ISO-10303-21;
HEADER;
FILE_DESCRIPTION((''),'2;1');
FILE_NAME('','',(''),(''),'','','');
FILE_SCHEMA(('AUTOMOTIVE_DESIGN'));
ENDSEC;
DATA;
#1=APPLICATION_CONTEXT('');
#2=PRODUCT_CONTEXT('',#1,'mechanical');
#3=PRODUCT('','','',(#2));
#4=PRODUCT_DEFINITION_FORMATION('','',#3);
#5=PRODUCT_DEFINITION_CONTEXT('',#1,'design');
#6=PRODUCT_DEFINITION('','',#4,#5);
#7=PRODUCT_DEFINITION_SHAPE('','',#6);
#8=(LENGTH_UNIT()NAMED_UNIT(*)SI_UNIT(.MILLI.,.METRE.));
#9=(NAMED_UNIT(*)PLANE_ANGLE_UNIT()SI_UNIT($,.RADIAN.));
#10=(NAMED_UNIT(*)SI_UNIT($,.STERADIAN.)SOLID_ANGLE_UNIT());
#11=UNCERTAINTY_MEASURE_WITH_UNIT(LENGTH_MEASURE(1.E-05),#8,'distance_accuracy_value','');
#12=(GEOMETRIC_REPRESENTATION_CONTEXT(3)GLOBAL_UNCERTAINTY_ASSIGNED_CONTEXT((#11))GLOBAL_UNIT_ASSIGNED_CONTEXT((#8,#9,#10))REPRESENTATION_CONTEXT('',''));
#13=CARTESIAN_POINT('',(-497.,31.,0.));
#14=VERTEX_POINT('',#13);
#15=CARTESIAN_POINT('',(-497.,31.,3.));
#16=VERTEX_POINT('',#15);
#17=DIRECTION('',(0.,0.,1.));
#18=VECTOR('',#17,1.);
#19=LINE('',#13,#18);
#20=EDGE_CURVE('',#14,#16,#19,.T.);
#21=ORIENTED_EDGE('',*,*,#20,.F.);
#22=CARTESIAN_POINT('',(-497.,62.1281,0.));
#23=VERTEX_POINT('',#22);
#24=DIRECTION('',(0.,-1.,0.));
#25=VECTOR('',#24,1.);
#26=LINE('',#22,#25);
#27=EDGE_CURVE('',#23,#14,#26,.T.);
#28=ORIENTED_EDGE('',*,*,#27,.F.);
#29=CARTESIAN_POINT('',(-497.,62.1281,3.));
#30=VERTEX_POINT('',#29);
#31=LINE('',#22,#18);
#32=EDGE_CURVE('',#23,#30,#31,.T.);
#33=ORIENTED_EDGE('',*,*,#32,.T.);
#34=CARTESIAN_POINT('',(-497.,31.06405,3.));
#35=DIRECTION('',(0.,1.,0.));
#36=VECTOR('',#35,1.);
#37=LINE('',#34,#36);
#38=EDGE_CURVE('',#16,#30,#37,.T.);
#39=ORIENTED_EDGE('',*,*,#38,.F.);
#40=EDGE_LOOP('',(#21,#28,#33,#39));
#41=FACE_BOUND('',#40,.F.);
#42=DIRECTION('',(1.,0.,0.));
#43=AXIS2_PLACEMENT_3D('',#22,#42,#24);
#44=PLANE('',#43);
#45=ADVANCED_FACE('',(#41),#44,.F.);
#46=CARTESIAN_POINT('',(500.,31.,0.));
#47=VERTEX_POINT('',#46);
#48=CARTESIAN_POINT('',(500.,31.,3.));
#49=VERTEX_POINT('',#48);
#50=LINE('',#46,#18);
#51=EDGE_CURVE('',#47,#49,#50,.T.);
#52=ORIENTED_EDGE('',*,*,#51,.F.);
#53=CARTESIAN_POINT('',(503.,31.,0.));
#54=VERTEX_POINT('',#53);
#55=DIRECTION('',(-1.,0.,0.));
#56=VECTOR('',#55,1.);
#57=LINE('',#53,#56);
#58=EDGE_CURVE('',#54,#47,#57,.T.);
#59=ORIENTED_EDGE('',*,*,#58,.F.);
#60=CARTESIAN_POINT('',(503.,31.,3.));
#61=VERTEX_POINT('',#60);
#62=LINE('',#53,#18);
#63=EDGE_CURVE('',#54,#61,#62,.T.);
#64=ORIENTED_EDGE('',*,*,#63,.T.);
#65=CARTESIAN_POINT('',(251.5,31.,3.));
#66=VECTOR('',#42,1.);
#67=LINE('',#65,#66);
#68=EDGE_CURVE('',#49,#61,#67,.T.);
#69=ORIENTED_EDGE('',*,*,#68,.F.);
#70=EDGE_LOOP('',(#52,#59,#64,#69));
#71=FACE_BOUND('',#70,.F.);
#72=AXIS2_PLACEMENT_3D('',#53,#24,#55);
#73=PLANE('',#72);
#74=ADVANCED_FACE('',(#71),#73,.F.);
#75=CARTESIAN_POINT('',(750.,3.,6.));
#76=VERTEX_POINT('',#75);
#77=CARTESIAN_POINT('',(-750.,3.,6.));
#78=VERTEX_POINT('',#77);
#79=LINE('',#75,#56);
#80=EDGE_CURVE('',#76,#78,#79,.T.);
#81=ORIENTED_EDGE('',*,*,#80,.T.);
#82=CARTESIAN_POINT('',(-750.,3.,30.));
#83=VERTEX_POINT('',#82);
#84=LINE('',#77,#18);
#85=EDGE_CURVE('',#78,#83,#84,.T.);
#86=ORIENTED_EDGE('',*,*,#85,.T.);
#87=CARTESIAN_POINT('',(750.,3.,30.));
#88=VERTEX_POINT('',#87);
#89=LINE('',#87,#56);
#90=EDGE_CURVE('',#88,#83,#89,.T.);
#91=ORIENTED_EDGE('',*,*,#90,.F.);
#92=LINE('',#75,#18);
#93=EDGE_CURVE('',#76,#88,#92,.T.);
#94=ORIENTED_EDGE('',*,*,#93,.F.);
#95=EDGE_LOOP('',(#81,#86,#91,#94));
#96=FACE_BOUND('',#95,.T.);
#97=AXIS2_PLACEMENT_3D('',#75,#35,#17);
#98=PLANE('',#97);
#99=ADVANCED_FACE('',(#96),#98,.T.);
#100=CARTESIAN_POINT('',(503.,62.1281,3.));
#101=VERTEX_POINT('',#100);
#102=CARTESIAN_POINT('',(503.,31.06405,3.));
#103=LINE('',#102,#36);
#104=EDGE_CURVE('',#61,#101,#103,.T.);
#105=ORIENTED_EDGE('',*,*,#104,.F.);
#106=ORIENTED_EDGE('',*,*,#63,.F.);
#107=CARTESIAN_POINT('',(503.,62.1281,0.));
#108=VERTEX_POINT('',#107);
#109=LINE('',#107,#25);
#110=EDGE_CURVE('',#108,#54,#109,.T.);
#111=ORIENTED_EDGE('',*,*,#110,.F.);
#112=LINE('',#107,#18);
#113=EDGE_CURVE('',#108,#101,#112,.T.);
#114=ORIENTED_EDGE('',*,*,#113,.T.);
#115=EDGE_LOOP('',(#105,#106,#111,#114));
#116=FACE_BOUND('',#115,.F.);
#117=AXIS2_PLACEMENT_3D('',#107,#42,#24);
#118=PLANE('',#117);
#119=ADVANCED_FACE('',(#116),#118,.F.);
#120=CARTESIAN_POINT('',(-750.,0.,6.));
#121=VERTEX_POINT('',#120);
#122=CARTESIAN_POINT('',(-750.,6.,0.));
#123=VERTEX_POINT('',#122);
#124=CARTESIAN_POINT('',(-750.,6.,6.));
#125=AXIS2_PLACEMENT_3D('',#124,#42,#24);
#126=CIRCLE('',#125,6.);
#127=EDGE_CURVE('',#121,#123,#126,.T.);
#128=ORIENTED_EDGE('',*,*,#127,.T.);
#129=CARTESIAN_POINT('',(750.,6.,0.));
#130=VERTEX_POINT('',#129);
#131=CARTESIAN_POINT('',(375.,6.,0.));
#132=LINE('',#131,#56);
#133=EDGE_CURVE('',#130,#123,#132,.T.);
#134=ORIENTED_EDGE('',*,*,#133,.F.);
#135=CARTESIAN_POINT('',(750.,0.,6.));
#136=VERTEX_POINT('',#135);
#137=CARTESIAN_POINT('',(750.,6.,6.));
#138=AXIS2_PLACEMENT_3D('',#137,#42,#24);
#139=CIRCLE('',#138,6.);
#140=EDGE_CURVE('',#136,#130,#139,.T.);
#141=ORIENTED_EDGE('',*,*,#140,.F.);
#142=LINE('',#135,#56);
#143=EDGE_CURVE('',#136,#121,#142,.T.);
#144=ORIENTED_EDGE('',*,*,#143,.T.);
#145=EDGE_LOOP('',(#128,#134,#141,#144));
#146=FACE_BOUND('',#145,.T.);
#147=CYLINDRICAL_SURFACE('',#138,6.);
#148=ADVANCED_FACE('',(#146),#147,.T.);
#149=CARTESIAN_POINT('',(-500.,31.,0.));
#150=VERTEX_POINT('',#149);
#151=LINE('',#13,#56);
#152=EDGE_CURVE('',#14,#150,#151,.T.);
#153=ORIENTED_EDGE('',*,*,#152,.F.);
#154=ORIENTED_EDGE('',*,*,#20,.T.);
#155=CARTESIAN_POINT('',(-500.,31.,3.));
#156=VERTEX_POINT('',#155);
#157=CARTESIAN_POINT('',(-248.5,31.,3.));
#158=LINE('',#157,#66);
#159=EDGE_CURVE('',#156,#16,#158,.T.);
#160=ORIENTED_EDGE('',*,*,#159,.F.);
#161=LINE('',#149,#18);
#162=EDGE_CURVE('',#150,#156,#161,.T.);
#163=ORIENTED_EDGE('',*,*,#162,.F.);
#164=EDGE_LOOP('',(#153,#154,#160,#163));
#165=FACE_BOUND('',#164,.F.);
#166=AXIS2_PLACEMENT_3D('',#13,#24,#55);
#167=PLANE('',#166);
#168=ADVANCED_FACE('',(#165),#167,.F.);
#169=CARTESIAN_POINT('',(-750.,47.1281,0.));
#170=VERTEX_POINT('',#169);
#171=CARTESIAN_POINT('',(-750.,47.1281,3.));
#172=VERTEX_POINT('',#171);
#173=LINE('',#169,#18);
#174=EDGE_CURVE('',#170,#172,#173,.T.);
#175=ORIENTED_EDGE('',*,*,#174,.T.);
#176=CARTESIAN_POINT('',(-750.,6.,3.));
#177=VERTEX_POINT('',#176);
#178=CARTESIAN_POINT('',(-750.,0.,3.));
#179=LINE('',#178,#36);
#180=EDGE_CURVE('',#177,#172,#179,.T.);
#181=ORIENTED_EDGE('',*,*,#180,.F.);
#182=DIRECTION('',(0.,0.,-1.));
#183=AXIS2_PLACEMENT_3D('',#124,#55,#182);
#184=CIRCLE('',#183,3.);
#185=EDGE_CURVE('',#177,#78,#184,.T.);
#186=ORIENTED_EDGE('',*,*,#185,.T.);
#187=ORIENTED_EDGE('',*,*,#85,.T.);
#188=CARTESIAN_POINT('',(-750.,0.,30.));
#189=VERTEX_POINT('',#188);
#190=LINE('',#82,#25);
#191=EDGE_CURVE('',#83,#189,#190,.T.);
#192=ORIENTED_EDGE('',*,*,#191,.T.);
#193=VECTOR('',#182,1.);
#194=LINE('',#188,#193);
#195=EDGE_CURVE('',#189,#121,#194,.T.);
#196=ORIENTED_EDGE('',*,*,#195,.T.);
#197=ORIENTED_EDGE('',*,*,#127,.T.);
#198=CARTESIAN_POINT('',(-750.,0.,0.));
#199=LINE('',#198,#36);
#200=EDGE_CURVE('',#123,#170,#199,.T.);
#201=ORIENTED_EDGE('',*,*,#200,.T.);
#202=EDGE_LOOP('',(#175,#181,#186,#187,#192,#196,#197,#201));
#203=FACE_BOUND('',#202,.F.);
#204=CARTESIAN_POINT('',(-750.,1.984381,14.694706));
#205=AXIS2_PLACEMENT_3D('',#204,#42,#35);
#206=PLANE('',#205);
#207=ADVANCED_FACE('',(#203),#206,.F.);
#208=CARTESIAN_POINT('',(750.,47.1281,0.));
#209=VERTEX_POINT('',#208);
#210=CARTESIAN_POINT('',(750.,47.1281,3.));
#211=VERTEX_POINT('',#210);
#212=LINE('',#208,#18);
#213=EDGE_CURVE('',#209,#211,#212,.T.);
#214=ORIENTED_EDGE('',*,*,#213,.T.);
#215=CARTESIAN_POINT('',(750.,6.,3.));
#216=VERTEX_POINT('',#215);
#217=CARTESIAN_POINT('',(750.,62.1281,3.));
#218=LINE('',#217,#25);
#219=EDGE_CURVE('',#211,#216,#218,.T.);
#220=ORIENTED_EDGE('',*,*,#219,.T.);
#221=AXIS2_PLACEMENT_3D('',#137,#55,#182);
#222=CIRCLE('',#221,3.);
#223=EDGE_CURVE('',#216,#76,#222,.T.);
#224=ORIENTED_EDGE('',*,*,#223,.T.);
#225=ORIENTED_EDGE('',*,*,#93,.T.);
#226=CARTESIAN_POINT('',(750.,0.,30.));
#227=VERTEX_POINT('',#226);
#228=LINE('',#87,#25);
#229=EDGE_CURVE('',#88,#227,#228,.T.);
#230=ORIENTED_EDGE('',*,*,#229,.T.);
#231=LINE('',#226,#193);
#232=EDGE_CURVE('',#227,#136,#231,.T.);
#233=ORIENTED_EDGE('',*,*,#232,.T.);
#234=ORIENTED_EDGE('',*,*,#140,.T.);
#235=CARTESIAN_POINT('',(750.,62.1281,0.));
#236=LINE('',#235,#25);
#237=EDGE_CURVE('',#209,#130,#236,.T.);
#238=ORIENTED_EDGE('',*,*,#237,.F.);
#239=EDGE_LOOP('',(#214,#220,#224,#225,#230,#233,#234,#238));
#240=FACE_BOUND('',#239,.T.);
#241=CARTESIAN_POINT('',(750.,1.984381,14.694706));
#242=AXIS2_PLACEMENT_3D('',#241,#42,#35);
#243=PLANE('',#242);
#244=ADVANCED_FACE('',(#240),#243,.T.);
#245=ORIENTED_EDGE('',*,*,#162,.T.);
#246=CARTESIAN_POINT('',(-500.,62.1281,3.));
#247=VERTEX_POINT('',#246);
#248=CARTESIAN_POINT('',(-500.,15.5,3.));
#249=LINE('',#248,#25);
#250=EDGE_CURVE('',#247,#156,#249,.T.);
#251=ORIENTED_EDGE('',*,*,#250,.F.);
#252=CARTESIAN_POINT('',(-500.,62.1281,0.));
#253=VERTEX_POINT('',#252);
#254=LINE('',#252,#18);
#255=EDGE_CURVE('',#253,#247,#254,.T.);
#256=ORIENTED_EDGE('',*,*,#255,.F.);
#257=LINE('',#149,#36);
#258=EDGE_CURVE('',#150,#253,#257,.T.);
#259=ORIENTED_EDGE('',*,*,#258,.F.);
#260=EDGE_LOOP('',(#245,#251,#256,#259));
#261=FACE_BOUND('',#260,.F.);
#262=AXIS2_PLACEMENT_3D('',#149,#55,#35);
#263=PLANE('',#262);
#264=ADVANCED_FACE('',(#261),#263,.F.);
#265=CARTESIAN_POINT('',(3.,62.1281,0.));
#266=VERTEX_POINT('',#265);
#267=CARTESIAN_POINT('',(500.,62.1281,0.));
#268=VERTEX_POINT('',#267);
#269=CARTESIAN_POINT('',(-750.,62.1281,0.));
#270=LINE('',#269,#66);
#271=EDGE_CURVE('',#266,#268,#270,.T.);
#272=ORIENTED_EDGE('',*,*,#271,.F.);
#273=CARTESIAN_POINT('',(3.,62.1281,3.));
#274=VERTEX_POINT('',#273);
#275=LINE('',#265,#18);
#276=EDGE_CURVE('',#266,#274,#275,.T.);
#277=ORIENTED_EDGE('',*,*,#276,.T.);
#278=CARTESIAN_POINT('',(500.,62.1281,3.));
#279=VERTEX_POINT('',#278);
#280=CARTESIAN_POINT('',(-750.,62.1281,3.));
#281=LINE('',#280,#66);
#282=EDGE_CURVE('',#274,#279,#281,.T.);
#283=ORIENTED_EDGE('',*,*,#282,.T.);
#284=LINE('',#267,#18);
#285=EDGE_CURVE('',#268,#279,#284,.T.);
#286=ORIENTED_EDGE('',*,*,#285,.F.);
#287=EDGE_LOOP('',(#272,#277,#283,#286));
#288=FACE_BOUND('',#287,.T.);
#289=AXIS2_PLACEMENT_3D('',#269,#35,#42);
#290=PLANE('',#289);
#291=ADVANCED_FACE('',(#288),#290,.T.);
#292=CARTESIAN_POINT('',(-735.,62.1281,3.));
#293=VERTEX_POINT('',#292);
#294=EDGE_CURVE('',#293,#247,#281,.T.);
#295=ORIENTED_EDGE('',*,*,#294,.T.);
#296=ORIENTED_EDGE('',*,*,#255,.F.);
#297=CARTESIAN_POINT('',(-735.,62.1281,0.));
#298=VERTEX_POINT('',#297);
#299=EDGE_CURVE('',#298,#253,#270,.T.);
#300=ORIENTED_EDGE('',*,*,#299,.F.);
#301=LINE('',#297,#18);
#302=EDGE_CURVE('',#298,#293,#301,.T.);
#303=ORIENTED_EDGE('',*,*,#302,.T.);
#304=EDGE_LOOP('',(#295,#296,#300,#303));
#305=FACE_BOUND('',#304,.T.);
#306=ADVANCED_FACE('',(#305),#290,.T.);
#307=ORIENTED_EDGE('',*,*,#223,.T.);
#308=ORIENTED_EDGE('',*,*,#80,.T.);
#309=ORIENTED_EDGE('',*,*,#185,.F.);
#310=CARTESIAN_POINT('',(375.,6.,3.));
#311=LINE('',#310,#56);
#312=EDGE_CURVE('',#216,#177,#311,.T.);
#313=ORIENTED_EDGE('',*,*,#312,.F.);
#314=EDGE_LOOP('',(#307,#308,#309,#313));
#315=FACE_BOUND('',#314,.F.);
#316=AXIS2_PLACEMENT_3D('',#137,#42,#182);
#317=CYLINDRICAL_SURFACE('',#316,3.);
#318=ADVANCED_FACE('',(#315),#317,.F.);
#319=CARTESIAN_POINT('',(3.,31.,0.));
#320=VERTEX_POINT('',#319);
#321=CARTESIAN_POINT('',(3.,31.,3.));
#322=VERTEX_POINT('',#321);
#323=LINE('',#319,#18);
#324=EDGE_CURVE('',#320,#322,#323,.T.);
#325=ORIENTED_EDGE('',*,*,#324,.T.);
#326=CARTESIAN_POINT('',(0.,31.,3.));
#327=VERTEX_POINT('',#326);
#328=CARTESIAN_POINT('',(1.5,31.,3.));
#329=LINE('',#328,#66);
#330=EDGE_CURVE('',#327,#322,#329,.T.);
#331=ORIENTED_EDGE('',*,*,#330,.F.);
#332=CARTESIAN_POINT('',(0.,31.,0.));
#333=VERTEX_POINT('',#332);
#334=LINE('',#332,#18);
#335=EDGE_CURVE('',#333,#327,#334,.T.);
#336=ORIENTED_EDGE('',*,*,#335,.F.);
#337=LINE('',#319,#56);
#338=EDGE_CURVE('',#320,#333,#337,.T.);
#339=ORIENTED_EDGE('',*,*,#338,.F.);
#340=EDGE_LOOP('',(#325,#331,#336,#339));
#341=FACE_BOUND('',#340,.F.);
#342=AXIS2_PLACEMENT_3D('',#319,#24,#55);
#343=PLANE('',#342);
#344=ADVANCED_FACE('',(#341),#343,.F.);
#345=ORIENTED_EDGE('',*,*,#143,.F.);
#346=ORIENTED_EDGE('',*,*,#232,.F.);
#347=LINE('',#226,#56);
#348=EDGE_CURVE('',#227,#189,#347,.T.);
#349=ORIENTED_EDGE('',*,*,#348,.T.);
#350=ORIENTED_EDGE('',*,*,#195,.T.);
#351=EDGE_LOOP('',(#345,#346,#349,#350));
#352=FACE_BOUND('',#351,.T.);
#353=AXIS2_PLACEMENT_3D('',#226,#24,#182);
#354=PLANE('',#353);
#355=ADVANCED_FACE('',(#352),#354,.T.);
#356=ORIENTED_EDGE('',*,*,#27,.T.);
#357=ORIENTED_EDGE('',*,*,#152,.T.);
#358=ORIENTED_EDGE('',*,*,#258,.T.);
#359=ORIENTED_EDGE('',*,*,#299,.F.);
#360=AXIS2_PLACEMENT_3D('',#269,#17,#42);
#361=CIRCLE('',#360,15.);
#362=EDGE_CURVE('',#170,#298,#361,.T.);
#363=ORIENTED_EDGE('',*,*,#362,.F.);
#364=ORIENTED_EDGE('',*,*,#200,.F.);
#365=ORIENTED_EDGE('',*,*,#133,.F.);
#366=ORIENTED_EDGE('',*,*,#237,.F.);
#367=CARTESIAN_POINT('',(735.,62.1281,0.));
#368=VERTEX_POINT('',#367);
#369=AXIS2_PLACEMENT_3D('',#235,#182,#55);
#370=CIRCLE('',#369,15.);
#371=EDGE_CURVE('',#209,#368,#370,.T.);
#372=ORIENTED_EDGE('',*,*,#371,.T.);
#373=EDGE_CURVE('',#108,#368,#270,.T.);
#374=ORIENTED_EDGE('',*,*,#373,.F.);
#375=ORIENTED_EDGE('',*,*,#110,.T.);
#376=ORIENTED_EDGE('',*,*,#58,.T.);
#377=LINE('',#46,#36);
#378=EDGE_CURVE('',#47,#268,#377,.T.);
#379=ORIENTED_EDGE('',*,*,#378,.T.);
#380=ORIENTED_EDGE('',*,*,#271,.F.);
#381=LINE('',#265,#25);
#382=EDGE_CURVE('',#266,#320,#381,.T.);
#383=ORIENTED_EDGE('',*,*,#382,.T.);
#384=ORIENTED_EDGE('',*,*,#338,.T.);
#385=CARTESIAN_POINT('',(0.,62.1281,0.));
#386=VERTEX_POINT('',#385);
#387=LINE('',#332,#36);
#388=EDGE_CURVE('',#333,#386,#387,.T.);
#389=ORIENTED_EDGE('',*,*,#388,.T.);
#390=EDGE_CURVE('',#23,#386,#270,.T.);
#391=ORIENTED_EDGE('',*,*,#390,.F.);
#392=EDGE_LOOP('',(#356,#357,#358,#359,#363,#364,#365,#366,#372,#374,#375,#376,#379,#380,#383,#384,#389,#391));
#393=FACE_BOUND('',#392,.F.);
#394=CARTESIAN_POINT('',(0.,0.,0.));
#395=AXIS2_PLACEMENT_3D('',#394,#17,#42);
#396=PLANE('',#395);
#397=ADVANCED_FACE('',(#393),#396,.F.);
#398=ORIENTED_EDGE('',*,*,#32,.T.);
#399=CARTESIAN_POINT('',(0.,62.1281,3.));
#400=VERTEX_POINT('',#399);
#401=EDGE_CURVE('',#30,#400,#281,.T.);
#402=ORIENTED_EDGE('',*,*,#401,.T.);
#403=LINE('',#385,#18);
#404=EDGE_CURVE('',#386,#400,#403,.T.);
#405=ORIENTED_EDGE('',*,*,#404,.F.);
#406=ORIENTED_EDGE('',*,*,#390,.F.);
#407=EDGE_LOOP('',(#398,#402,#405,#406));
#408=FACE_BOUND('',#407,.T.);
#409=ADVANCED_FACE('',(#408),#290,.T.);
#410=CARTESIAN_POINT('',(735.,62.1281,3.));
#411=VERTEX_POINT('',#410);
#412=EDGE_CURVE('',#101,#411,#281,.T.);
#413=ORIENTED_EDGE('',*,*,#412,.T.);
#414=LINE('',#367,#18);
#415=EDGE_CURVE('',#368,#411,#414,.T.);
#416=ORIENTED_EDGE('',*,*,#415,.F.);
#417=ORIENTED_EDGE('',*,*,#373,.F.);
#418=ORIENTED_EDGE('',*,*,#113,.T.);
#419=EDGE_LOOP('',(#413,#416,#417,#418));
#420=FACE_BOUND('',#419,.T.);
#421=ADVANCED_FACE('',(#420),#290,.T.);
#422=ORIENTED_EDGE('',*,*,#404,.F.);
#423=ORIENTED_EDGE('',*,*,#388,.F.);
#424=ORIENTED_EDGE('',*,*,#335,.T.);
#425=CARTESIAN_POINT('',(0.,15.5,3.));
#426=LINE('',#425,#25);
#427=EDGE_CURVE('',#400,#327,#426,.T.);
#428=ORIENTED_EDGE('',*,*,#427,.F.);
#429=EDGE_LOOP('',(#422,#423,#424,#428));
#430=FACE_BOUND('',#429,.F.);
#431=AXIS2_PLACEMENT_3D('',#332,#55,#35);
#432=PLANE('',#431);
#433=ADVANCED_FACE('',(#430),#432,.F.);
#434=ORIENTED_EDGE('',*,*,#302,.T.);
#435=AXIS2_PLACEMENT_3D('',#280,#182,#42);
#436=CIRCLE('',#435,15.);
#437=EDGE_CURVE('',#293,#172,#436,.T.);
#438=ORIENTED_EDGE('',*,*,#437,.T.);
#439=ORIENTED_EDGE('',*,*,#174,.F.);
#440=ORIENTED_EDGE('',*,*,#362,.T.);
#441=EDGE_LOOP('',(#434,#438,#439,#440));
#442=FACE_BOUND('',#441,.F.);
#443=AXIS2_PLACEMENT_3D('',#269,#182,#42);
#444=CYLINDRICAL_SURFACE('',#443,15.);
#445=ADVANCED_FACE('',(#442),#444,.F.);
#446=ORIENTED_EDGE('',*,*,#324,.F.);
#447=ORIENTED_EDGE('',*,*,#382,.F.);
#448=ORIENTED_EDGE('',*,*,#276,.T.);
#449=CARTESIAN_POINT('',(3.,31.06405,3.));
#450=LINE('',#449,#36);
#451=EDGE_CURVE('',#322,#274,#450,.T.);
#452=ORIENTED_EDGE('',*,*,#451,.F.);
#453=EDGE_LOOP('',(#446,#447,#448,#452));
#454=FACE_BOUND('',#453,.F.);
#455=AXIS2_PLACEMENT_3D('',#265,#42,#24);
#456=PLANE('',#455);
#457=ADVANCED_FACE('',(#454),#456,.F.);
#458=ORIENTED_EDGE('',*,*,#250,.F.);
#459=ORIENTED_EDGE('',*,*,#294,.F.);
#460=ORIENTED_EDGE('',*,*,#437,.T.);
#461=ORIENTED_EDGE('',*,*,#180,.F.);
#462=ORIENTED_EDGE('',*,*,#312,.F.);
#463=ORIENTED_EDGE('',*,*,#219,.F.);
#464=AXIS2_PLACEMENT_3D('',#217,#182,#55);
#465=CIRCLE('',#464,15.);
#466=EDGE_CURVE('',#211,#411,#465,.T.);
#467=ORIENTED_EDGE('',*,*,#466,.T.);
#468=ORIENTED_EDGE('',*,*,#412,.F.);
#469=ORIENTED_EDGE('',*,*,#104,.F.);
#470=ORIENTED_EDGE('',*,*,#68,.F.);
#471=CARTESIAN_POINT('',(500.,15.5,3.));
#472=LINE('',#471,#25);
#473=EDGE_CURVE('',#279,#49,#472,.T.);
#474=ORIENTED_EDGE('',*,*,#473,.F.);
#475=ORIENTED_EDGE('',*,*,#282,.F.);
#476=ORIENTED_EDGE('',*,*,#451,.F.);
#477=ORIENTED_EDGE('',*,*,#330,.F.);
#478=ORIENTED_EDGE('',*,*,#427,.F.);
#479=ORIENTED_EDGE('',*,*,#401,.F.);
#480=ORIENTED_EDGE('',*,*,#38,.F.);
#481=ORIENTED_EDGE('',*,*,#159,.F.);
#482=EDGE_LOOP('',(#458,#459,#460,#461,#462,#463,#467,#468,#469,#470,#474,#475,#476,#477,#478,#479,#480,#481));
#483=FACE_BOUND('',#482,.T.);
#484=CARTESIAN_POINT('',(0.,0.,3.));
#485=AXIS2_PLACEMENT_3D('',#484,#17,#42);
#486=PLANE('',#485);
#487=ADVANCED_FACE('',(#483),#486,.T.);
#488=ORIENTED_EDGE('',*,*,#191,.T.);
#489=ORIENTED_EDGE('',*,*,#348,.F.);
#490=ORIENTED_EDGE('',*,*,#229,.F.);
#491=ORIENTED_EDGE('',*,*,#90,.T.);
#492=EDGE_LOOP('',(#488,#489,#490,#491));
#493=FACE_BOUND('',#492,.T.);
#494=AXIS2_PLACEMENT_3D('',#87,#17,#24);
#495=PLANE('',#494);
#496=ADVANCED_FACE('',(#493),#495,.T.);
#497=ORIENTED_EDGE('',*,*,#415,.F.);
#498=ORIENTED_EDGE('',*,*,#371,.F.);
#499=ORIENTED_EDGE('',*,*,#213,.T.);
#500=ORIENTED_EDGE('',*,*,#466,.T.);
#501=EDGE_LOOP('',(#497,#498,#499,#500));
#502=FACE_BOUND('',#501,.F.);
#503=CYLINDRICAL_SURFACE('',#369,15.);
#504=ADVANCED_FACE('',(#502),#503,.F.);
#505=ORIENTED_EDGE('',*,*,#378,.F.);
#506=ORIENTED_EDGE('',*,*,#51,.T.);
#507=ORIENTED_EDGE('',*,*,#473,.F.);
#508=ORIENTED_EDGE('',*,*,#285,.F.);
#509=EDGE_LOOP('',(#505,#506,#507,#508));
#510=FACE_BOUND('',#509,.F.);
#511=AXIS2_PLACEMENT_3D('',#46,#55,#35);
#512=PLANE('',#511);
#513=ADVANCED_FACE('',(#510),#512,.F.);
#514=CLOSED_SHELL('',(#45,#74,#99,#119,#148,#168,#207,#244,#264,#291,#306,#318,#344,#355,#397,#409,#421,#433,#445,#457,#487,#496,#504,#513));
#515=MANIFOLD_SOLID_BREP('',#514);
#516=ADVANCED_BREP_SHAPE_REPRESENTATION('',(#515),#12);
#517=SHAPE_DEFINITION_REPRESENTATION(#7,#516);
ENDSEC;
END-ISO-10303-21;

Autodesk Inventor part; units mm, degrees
ref_plane "YZ Plane" through (0, 0, 0) normal (1, 0, 0) x (0, 1, 0)
ref_plane "XZ Plane" through (0, 0, 0) normal (0, 1, 0) x (-1, 0, 0)
ref_plane "XY Plane" through (0, 0, 0) normal (0, 0, 1) x (1, 0, 0)
sketch "Sketch1" plane through (0, 0, 0) normal (0, 0, 1) x (1, 0, 0)
  line L0 (-750, 62.1281) -> (750, 62.1281)
  line L1 (750, 62.1281) -> (750, 0)
  line L2 (750, 0) -> (-750, 0)
  line L3 (-750, 0) -> (-750, 62.1281)
  point P0 (0, 0)
  point P1 (0, 0)
  dimension "d0" = 1500
  dimension "d1" = 62.1281
extrude "Plate1" add sketch "Sketch1" along normal blind 3
sketch "Sketch2" plane through (750, 3, 0) normal (0, -1, 0) x (1, 0, 0)
  line L0 (-1500, 0) -> (0, 0)
  line L1 (0, 0) -> (0, 30)
  line L2 (0, 30) -> (-1500, 30)
  line L3 (-1500, 30) -> (-1500, 0)
edge flange "Flange1" height 30 angle 90 thickness 3 bend radius 3 thickness toward (0, -1, 0) relief tear relief width 3 relief depth 1.5 edges at (0, 0, 3) wall of the first edge with corners at (-750, 3, 0) (750, 3, 0) (750, 3, 30) (-750, 3, 30)
bend "Bend1"
corner "Corner1"
sketch "Sketch5" plane through (0, 0, 0) normal (0, 0, -1) x (-1, 0, 0)
  line L0 (750, 62.1281) -> (-750, 62.1281) projected
  line L1 (497, 62.1281) -> (497, 31)
  line L2 (497, 31) -> (500, 31)
  line L3 (500, 31) -> (500, 62.1281)
  line L4 (750, 0) -> (-750, 0) projected
  point P0 (0, 0)
  dimension "d18" = 3
  dimension "d19" = 250
  dimension "d20" = 31
extrude "Extrusion1" cut sketch "Sketch5" against normal through all
pattern_linear "Rectangular Pattern1" count 3 spacing 500 along (1, 0, 0) of "Extrusion1"
sketch "Sketch6" plane through (0, 0, 0) normal (0, 0, -1) x (-1, 0, 0)
  line L0 (-750, 62.1281) -> (-750, 6) projected
  circle A0 centre (-750, 62.1281) radius 15
  line L1 (-750, 62.1281) -> (-503, 62.1281) projected
  point P0 (0, 0)
  point P1 (-735, 62.1281)
  point P2 (-750, 47.1281)
  dimension "d24" = 30
extrude "Extrusion2" cut sketch "Sketch6" against normal through all contours L1 A0 L0 picked at (-740.1254, 61.0155)
mirror "Mirror1" about plane through (0, 0, 0) normal (1, 0, 0) of "Extrusion2"
equation "\"d1\" = Стрингер_2"
equation "\"d18\" = Thickness"
equation "\"d2\" = Thickness"
equation "\"d3\" = BendReliefWidth"
equation "\"d4\" = BendReliefDepth"
equation "\"d5\" = MinimumRemnant"
equation "\"d6\" = TransitionRadius"
equation "\"d9\" = BendRadius"
equation "\"d10\" = CornerReliefSize"
equation "\"d11\" = GapSize"
equation "\"d12\" = JacobiRadiusSize"
equation "\"BendRadius\" = Thickness"
equation "\"BendReliefWidth\" = Thickness"
equation "\"BendReliefDepth\" = 0.5 * Thickness"
equation "\"CornerReliefSize\" = 4 * Thickness"
equation "\"MinimumRemnant\" = 2 * Thickness"
equation "\"TransitionRadius\" = BendRadius"
equation "\"JacobiRadiusSize\" = BendRadius"
equation "\"GapSize\" = Thickness"
equation "\"qqqqqq\" = 67.35706"
equation "\"Стрингер_2\" = 62.128061"
equation "\"Thickness\" = 3"
properties part number "МОО 052 стрингер спина 21"
